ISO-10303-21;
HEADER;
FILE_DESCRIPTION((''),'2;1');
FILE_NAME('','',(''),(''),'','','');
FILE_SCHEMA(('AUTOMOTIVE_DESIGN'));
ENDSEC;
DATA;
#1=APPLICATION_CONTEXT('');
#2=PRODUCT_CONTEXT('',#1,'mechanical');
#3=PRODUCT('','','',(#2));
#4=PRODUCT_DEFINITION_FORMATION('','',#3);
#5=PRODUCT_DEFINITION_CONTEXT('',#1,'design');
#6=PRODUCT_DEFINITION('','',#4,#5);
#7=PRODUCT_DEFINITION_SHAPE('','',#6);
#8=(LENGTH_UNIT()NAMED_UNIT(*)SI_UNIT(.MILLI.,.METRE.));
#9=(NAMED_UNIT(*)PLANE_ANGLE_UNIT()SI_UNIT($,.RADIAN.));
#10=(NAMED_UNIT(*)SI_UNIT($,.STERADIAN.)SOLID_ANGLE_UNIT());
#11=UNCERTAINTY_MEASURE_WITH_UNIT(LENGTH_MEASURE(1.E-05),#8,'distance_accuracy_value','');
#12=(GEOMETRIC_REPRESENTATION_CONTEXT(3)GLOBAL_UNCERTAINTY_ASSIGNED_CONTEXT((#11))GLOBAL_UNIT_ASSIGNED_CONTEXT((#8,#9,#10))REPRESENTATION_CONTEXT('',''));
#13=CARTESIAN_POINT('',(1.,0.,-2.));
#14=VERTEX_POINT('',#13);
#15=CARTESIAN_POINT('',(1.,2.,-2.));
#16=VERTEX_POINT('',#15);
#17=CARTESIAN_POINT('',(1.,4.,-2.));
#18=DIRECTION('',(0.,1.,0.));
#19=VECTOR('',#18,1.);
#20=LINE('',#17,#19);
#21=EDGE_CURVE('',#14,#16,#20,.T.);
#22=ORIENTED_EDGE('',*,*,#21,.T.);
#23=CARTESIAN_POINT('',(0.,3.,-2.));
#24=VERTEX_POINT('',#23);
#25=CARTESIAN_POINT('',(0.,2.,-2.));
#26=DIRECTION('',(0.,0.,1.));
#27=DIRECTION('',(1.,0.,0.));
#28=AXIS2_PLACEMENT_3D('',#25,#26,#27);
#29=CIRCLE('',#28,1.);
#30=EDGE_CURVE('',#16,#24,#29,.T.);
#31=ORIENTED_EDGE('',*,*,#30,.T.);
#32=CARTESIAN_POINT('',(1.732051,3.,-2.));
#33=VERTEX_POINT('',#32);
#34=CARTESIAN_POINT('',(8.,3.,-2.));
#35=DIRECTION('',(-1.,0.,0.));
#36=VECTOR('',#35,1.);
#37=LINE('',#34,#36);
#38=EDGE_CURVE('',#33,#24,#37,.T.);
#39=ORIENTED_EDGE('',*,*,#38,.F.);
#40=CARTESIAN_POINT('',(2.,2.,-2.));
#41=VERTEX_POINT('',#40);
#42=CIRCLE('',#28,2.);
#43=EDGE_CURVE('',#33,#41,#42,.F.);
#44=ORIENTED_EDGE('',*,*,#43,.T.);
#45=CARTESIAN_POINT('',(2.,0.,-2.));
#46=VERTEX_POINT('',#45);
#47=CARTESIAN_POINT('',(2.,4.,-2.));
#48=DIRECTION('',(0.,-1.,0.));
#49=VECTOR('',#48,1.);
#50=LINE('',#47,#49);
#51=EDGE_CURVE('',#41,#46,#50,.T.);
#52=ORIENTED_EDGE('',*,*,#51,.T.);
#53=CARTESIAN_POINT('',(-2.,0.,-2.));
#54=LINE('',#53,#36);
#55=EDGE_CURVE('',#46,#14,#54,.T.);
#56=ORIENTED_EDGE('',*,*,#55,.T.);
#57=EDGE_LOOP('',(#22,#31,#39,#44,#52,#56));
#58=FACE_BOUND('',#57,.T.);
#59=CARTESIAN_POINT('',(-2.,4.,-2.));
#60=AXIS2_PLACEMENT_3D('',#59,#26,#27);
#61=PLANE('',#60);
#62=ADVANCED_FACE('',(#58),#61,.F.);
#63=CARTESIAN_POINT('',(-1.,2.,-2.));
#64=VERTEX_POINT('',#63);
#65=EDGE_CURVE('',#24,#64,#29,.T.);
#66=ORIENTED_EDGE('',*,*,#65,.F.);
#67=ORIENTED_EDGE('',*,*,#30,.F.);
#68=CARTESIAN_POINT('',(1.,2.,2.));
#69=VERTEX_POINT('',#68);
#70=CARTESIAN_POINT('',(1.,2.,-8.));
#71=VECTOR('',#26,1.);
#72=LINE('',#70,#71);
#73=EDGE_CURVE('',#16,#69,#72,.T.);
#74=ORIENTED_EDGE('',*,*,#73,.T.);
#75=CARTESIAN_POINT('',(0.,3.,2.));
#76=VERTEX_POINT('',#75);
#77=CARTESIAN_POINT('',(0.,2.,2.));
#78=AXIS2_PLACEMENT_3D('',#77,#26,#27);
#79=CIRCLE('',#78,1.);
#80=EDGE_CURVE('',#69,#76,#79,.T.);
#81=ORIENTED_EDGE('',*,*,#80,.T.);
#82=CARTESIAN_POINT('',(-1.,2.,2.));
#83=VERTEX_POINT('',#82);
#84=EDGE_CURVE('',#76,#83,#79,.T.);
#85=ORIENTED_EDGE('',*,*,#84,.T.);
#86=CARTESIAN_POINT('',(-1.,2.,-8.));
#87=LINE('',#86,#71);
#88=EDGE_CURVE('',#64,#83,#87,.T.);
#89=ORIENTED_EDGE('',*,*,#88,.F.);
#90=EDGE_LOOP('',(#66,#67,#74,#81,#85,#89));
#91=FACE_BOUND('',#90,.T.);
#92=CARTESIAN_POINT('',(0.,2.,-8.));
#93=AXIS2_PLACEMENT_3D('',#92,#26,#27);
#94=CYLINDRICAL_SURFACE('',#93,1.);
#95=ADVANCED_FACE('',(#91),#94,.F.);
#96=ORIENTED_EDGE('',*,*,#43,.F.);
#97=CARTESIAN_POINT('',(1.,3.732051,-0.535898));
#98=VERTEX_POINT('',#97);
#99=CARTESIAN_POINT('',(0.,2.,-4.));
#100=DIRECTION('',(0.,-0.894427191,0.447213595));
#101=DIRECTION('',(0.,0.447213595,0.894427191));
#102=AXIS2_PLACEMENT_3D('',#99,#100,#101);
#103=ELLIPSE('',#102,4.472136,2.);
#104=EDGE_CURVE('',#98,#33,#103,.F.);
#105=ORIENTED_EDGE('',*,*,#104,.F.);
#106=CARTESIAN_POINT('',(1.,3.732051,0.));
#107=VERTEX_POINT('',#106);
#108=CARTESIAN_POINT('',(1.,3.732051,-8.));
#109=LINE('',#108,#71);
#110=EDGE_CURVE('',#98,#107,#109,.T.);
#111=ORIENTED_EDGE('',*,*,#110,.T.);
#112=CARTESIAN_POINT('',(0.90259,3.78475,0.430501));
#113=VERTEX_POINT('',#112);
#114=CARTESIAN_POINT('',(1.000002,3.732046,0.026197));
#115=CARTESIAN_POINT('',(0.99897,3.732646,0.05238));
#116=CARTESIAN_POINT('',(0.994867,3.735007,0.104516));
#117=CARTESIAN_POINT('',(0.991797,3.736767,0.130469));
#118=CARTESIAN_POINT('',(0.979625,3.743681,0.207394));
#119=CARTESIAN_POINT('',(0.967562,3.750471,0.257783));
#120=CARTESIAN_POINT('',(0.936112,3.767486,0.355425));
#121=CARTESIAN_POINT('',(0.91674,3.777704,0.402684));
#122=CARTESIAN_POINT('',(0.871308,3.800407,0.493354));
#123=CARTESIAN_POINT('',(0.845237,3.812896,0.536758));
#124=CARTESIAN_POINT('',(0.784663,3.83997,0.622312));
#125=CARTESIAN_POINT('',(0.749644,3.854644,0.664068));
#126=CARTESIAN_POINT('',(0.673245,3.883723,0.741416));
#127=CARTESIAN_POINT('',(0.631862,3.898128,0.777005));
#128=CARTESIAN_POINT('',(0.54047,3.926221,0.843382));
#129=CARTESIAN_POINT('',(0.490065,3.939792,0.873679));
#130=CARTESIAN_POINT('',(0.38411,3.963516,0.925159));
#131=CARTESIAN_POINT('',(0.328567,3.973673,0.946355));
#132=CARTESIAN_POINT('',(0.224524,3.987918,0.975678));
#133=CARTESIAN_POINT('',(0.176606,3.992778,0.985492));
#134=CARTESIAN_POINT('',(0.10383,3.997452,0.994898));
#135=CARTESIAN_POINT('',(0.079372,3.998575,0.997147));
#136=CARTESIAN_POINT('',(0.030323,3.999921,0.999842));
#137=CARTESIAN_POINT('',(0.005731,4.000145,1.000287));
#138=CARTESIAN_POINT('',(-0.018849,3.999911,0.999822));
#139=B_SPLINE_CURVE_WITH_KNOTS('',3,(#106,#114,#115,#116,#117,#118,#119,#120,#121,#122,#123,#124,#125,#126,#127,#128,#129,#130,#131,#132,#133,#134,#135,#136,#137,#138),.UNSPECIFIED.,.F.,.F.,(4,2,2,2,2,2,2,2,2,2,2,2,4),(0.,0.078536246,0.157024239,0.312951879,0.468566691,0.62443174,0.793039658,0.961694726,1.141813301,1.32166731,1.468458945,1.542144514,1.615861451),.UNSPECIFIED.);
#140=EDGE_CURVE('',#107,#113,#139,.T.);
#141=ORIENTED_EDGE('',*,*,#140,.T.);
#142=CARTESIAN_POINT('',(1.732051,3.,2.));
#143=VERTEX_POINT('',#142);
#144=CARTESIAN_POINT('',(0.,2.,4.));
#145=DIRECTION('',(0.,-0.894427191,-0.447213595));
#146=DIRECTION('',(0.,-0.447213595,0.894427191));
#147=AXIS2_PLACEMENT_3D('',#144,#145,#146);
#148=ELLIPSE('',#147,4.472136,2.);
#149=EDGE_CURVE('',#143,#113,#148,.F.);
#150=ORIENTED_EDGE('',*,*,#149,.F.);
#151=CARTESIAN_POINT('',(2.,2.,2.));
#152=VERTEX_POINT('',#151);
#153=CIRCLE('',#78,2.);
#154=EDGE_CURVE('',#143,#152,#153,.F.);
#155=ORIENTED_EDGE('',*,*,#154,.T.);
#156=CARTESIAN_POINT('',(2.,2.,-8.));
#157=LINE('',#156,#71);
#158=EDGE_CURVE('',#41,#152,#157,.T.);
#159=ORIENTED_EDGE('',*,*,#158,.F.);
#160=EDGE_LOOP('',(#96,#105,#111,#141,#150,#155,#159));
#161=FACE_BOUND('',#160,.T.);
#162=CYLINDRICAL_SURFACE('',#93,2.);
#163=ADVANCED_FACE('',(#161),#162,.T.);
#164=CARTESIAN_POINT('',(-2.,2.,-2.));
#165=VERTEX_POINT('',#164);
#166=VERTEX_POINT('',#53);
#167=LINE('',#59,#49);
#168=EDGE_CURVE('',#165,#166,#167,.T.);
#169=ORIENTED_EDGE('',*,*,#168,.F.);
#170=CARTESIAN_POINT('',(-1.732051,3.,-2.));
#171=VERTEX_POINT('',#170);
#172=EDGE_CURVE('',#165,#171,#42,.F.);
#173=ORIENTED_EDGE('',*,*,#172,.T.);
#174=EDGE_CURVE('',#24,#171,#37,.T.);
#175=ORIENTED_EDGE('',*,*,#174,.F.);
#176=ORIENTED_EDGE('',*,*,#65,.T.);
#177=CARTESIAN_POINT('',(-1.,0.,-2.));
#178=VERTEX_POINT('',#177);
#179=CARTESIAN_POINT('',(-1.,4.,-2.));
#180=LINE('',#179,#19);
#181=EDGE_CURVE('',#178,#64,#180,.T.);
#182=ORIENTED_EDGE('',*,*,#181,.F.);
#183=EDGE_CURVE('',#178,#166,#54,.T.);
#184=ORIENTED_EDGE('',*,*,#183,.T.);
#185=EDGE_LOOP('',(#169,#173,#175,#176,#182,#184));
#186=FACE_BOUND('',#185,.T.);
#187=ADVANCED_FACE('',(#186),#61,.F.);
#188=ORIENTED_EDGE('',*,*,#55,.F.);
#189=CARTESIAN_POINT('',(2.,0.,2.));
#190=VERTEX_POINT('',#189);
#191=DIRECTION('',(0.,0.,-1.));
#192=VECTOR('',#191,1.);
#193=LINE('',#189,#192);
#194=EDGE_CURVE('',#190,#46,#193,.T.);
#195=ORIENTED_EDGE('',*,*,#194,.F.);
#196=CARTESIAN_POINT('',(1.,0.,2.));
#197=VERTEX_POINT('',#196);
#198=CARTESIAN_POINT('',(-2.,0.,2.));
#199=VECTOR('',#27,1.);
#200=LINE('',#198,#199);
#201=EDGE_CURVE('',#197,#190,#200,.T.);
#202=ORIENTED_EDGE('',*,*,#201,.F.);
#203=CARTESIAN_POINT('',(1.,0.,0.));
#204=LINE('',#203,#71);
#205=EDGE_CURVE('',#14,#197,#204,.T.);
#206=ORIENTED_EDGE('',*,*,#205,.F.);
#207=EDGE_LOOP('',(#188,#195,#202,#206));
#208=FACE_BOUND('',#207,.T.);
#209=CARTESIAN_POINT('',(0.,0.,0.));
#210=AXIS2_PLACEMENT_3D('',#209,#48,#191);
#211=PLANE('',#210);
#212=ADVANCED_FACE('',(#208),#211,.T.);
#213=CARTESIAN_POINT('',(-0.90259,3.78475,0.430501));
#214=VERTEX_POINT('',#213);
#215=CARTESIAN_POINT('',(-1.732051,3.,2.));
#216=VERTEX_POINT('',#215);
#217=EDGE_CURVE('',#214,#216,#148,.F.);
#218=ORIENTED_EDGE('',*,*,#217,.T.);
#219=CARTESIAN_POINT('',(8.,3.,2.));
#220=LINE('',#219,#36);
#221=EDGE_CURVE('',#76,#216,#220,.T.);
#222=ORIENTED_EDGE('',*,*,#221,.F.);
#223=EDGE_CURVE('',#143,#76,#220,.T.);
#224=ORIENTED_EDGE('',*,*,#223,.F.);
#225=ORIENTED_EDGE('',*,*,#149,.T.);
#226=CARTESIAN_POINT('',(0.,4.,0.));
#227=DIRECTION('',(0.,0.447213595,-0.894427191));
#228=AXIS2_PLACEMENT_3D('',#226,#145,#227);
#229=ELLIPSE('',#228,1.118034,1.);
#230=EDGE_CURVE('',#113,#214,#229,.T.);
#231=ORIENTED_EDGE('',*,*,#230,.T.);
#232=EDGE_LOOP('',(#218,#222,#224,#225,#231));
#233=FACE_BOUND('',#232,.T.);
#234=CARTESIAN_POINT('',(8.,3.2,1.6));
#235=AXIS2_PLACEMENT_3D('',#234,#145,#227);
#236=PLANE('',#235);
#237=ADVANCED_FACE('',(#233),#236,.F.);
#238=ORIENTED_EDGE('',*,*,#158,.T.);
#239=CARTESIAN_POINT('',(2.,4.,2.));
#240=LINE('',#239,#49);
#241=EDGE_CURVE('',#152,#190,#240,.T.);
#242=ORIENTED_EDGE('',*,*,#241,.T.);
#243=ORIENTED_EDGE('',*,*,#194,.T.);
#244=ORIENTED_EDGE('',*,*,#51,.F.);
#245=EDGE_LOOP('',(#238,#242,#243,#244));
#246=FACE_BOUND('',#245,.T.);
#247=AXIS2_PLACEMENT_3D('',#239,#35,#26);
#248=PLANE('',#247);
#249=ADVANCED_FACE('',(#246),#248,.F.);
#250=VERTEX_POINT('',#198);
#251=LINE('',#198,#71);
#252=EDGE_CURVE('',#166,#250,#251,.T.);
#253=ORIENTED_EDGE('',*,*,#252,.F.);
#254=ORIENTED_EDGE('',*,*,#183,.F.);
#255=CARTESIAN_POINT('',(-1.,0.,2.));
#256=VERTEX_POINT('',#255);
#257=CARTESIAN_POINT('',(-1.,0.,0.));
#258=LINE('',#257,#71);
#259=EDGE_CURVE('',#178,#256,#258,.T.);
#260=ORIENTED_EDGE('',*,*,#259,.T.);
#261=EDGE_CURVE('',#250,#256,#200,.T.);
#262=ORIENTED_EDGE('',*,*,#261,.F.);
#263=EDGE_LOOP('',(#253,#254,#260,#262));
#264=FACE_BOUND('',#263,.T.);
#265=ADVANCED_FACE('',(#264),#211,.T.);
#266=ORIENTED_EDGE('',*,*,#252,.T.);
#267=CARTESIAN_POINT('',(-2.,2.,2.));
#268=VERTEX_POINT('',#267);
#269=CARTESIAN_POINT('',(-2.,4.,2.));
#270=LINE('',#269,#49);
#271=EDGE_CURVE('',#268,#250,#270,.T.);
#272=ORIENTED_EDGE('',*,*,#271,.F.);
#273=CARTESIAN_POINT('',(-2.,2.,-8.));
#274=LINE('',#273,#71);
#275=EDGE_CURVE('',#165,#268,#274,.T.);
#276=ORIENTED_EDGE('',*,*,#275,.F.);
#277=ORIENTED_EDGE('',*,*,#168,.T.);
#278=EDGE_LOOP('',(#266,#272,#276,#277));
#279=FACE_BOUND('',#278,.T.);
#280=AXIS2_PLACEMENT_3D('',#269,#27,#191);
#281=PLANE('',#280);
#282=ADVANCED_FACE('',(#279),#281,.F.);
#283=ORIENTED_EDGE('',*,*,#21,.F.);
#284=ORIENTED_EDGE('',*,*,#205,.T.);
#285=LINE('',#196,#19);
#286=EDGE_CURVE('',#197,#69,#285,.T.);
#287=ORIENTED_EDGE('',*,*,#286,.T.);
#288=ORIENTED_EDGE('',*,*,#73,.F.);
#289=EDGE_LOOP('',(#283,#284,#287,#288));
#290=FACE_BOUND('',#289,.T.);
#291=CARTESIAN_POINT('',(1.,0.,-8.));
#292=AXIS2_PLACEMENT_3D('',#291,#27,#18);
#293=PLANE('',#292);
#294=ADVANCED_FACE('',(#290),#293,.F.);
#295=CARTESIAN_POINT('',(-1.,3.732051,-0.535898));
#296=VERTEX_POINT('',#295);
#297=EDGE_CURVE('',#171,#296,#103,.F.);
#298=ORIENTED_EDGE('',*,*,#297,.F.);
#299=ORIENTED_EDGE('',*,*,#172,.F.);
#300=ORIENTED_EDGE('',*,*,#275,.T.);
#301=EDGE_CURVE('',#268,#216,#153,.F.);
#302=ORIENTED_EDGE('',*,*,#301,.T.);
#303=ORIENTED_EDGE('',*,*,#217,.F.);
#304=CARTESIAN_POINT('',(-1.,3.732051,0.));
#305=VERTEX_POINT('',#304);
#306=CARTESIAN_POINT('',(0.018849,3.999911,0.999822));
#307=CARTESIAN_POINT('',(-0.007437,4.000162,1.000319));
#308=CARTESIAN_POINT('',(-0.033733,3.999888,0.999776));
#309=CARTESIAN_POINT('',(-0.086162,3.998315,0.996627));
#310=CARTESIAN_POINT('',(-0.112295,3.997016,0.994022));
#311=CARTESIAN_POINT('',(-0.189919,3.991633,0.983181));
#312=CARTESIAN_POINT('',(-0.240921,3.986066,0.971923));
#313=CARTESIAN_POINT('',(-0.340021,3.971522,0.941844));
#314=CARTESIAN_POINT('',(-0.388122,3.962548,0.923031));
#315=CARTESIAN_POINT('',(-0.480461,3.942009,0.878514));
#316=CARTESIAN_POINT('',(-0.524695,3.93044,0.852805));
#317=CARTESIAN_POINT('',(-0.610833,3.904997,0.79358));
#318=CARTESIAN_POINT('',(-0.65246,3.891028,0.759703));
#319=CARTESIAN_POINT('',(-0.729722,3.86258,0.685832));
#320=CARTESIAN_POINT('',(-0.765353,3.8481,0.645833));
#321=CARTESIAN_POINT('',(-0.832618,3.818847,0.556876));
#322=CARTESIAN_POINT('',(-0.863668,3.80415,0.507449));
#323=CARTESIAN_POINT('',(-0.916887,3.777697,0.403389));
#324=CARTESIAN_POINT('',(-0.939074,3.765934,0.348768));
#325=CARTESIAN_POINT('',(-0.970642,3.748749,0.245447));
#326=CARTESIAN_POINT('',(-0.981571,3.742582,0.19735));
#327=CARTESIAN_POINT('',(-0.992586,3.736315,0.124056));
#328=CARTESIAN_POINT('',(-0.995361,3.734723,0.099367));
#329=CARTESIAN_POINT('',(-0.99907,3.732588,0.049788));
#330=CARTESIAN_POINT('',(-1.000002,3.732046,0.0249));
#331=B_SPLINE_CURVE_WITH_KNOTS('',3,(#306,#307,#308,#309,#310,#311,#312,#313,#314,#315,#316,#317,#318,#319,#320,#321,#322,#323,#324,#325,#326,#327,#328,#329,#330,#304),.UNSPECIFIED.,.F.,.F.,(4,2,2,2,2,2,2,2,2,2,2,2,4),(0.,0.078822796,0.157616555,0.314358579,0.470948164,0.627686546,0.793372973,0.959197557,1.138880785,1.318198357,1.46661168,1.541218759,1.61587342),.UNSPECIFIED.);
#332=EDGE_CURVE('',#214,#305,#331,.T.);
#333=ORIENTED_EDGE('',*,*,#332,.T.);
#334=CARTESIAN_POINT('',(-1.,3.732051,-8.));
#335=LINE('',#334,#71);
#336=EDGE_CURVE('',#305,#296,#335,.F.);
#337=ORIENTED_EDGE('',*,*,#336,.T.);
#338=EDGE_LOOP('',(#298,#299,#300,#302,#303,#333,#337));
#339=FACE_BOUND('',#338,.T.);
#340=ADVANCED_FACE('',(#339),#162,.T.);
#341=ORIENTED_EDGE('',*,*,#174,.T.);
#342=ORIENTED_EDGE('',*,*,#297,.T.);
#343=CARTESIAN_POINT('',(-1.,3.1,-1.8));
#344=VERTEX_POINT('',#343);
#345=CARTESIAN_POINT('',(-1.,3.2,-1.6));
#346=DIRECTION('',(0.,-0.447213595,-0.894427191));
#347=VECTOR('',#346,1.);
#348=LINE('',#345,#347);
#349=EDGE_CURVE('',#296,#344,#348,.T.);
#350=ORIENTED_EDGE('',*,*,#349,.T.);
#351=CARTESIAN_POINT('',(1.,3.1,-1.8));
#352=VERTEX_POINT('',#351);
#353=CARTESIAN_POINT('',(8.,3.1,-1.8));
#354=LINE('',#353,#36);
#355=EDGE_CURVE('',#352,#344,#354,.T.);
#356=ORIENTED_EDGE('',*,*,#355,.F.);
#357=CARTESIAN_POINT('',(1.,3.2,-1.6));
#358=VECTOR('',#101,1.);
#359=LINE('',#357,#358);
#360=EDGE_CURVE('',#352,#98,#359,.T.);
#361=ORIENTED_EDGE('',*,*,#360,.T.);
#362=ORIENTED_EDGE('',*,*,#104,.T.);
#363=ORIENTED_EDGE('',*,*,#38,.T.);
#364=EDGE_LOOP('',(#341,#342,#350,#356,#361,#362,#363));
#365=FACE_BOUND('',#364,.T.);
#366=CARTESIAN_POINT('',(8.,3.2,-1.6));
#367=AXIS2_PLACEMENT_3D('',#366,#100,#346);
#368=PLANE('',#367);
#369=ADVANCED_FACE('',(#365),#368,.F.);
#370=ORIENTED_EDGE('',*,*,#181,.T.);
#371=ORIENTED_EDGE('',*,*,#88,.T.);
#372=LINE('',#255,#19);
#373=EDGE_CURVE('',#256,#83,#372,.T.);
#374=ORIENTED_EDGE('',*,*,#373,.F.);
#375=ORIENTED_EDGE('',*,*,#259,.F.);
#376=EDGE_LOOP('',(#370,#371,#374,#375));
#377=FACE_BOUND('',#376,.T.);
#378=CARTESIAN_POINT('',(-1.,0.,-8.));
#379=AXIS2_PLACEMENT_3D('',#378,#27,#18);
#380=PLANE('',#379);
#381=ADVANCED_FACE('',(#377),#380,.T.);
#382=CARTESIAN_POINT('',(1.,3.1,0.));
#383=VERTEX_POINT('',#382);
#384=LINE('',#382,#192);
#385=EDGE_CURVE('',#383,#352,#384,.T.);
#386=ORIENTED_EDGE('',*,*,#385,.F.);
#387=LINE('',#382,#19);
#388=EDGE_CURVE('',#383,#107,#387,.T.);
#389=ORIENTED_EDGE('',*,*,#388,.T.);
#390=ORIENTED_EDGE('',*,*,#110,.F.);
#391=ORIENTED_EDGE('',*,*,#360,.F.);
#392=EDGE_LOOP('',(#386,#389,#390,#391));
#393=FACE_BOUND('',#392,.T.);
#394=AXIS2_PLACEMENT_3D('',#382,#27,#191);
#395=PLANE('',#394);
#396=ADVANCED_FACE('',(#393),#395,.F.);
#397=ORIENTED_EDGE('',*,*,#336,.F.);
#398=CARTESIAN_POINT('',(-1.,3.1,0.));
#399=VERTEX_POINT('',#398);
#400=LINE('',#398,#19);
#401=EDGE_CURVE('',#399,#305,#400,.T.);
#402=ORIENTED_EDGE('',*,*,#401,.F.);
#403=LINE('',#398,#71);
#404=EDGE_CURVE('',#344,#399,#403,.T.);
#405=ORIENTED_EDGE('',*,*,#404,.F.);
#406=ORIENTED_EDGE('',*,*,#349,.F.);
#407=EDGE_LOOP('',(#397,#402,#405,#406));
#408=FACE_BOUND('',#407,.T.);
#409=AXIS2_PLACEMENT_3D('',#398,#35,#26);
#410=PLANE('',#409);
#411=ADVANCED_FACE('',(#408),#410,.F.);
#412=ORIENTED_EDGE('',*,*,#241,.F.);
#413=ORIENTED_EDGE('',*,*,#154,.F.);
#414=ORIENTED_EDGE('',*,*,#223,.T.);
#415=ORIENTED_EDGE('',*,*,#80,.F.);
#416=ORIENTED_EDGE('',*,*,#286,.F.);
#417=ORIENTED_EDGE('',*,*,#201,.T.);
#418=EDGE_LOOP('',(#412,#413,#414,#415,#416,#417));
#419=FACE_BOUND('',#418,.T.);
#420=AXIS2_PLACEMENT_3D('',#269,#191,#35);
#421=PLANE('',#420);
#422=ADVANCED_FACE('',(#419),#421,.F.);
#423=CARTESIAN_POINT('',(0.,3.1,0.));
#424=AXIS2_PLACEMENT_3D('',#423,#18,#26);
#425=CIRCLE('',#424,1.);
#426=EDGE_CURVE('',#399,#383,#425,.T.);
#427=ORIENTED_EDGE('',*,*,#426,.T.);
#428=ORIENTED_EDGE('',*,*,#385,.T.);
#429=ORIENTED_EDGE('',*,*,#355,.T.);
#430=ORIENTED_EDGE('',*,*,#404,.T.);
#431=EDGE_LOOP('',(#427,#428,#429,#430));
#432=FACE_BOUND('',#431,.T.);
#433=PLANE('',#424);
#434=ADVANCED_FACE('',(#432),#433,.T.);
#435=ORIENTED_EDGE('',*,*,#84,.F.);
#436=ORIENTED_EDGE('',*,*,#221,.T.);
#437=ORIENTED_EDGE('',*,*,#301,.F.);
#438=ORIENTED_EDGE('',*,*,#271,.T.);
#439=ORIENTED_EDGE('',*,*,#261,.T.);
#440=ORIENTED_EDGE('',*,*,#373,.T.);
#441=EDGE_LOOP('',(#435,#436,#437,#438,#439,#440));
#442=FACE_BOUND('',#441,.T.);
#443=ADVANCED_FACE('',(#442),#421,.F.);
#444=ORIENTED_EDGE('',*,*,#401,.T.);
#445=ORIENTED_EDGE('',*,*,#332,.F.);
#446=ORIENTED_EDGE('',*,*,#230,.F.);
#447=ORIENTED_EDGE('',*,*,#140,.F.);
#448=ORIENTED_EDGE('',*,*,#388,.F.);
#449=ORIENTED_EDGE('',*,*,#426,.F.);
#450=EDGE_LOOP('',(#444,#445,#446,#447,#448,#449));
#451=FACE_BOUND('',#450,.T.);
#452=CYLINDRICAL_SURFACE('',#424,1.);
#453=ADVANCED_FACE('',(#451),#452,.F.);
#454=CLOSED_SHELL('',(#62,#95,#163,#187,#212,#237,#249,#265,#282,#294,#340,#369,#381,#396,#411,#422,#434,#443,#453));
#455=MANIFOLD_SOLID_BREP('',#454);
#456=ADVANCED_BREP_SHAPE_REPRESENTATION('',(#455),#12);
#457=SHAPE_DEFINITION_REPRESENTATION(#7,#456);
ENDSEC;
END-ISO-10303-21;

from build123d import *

# Parameters (mm, degrees)
SKETCH1_W           = 4
SKETCH1_H           = 4
BOSS_EXTRUDE1_DEPTH = 4
CUT_EXTRUDE1_DEPTH  = 10
CUT_EXTRUDE2_DEPTH  = 10
CUT_EXTRUDE5_DEPTH  = 0.9


with BuildPart() as part:
    # Sketch1 → Boss-Extrude1 (new body)
    with BuildSketch(Plane(origin=(0, 0, 0), x_dir=(1, 0, 0), z_dir=(0, 1, 0))):
        Rectangle(SKETCH1_W, SKETCH1_H)
    extrude(amount=BOSS_EXTRUDE1_DEPTH)

    # Sketch4 → Cut-Extrude1 (cut)
    with BuildSketch(Plane.ZY.offset(2)):
        Polygon((-2, 4), (-2, 3), (0, 4), align=None)
        Polygon((2, 4), (0, 4), (2, 3), align=None)
    extrude(amount=-CUT_EXTRUDE1_DEPTH, mode=Mode.SUBTRACT)

    # Sketch5 → Cut-Extrude2 (cut)
    with BuildSketch(Plane.XY.offset(2)):
        with BuildLine():
            Line((2, 4), (0, 4))
            ThreePointArc((0, 4), (1.414213562, 3.414213562), (2, 2))
            Line((2, 2), (2, 4))
        make_face()
        with BuildLine():
            Line((0, 4), (-2, 4))
            Line((-2, 4), (-2, 2))
            ThreePointArc((-2, 2), (-1.414213562, 3.414213562), (0, 4))
        make_face()
        with BuildLine():
            ThreePointArc((1, 2), (0, 3), (-1, 2))
            Line((-1, 2), (-1, 0))
            Line((-1, 0), (1, 0))
            Line((1, 0), (1, 2))
        make_face()
    extrude(amount=-CUT_EXTRUDE2_DEPTH, mode=Mode.SUBTRACT)

    # Sketch6 → Cut-Extrude5 (cut)
    with BuildSketch(Plane(origin=(0, 4, 0), x_dir=(1, 0, 0), z_dir=(0, 1, 0))):
        with BuildLine():
            Line((-1, 0), (-1, 2))
            ThreePointArc((-1, 2), (0, 3), (1, 2))
            Line((1, 2), (1, 0))
            ThreePointArc((1, 0), (0, -1), (-1, 0))
        make_face()
    extrude(amount=-CUT_EXTRUDE5_DEPTH, mode=Mode.SUBTRACT)


solid = part.part
